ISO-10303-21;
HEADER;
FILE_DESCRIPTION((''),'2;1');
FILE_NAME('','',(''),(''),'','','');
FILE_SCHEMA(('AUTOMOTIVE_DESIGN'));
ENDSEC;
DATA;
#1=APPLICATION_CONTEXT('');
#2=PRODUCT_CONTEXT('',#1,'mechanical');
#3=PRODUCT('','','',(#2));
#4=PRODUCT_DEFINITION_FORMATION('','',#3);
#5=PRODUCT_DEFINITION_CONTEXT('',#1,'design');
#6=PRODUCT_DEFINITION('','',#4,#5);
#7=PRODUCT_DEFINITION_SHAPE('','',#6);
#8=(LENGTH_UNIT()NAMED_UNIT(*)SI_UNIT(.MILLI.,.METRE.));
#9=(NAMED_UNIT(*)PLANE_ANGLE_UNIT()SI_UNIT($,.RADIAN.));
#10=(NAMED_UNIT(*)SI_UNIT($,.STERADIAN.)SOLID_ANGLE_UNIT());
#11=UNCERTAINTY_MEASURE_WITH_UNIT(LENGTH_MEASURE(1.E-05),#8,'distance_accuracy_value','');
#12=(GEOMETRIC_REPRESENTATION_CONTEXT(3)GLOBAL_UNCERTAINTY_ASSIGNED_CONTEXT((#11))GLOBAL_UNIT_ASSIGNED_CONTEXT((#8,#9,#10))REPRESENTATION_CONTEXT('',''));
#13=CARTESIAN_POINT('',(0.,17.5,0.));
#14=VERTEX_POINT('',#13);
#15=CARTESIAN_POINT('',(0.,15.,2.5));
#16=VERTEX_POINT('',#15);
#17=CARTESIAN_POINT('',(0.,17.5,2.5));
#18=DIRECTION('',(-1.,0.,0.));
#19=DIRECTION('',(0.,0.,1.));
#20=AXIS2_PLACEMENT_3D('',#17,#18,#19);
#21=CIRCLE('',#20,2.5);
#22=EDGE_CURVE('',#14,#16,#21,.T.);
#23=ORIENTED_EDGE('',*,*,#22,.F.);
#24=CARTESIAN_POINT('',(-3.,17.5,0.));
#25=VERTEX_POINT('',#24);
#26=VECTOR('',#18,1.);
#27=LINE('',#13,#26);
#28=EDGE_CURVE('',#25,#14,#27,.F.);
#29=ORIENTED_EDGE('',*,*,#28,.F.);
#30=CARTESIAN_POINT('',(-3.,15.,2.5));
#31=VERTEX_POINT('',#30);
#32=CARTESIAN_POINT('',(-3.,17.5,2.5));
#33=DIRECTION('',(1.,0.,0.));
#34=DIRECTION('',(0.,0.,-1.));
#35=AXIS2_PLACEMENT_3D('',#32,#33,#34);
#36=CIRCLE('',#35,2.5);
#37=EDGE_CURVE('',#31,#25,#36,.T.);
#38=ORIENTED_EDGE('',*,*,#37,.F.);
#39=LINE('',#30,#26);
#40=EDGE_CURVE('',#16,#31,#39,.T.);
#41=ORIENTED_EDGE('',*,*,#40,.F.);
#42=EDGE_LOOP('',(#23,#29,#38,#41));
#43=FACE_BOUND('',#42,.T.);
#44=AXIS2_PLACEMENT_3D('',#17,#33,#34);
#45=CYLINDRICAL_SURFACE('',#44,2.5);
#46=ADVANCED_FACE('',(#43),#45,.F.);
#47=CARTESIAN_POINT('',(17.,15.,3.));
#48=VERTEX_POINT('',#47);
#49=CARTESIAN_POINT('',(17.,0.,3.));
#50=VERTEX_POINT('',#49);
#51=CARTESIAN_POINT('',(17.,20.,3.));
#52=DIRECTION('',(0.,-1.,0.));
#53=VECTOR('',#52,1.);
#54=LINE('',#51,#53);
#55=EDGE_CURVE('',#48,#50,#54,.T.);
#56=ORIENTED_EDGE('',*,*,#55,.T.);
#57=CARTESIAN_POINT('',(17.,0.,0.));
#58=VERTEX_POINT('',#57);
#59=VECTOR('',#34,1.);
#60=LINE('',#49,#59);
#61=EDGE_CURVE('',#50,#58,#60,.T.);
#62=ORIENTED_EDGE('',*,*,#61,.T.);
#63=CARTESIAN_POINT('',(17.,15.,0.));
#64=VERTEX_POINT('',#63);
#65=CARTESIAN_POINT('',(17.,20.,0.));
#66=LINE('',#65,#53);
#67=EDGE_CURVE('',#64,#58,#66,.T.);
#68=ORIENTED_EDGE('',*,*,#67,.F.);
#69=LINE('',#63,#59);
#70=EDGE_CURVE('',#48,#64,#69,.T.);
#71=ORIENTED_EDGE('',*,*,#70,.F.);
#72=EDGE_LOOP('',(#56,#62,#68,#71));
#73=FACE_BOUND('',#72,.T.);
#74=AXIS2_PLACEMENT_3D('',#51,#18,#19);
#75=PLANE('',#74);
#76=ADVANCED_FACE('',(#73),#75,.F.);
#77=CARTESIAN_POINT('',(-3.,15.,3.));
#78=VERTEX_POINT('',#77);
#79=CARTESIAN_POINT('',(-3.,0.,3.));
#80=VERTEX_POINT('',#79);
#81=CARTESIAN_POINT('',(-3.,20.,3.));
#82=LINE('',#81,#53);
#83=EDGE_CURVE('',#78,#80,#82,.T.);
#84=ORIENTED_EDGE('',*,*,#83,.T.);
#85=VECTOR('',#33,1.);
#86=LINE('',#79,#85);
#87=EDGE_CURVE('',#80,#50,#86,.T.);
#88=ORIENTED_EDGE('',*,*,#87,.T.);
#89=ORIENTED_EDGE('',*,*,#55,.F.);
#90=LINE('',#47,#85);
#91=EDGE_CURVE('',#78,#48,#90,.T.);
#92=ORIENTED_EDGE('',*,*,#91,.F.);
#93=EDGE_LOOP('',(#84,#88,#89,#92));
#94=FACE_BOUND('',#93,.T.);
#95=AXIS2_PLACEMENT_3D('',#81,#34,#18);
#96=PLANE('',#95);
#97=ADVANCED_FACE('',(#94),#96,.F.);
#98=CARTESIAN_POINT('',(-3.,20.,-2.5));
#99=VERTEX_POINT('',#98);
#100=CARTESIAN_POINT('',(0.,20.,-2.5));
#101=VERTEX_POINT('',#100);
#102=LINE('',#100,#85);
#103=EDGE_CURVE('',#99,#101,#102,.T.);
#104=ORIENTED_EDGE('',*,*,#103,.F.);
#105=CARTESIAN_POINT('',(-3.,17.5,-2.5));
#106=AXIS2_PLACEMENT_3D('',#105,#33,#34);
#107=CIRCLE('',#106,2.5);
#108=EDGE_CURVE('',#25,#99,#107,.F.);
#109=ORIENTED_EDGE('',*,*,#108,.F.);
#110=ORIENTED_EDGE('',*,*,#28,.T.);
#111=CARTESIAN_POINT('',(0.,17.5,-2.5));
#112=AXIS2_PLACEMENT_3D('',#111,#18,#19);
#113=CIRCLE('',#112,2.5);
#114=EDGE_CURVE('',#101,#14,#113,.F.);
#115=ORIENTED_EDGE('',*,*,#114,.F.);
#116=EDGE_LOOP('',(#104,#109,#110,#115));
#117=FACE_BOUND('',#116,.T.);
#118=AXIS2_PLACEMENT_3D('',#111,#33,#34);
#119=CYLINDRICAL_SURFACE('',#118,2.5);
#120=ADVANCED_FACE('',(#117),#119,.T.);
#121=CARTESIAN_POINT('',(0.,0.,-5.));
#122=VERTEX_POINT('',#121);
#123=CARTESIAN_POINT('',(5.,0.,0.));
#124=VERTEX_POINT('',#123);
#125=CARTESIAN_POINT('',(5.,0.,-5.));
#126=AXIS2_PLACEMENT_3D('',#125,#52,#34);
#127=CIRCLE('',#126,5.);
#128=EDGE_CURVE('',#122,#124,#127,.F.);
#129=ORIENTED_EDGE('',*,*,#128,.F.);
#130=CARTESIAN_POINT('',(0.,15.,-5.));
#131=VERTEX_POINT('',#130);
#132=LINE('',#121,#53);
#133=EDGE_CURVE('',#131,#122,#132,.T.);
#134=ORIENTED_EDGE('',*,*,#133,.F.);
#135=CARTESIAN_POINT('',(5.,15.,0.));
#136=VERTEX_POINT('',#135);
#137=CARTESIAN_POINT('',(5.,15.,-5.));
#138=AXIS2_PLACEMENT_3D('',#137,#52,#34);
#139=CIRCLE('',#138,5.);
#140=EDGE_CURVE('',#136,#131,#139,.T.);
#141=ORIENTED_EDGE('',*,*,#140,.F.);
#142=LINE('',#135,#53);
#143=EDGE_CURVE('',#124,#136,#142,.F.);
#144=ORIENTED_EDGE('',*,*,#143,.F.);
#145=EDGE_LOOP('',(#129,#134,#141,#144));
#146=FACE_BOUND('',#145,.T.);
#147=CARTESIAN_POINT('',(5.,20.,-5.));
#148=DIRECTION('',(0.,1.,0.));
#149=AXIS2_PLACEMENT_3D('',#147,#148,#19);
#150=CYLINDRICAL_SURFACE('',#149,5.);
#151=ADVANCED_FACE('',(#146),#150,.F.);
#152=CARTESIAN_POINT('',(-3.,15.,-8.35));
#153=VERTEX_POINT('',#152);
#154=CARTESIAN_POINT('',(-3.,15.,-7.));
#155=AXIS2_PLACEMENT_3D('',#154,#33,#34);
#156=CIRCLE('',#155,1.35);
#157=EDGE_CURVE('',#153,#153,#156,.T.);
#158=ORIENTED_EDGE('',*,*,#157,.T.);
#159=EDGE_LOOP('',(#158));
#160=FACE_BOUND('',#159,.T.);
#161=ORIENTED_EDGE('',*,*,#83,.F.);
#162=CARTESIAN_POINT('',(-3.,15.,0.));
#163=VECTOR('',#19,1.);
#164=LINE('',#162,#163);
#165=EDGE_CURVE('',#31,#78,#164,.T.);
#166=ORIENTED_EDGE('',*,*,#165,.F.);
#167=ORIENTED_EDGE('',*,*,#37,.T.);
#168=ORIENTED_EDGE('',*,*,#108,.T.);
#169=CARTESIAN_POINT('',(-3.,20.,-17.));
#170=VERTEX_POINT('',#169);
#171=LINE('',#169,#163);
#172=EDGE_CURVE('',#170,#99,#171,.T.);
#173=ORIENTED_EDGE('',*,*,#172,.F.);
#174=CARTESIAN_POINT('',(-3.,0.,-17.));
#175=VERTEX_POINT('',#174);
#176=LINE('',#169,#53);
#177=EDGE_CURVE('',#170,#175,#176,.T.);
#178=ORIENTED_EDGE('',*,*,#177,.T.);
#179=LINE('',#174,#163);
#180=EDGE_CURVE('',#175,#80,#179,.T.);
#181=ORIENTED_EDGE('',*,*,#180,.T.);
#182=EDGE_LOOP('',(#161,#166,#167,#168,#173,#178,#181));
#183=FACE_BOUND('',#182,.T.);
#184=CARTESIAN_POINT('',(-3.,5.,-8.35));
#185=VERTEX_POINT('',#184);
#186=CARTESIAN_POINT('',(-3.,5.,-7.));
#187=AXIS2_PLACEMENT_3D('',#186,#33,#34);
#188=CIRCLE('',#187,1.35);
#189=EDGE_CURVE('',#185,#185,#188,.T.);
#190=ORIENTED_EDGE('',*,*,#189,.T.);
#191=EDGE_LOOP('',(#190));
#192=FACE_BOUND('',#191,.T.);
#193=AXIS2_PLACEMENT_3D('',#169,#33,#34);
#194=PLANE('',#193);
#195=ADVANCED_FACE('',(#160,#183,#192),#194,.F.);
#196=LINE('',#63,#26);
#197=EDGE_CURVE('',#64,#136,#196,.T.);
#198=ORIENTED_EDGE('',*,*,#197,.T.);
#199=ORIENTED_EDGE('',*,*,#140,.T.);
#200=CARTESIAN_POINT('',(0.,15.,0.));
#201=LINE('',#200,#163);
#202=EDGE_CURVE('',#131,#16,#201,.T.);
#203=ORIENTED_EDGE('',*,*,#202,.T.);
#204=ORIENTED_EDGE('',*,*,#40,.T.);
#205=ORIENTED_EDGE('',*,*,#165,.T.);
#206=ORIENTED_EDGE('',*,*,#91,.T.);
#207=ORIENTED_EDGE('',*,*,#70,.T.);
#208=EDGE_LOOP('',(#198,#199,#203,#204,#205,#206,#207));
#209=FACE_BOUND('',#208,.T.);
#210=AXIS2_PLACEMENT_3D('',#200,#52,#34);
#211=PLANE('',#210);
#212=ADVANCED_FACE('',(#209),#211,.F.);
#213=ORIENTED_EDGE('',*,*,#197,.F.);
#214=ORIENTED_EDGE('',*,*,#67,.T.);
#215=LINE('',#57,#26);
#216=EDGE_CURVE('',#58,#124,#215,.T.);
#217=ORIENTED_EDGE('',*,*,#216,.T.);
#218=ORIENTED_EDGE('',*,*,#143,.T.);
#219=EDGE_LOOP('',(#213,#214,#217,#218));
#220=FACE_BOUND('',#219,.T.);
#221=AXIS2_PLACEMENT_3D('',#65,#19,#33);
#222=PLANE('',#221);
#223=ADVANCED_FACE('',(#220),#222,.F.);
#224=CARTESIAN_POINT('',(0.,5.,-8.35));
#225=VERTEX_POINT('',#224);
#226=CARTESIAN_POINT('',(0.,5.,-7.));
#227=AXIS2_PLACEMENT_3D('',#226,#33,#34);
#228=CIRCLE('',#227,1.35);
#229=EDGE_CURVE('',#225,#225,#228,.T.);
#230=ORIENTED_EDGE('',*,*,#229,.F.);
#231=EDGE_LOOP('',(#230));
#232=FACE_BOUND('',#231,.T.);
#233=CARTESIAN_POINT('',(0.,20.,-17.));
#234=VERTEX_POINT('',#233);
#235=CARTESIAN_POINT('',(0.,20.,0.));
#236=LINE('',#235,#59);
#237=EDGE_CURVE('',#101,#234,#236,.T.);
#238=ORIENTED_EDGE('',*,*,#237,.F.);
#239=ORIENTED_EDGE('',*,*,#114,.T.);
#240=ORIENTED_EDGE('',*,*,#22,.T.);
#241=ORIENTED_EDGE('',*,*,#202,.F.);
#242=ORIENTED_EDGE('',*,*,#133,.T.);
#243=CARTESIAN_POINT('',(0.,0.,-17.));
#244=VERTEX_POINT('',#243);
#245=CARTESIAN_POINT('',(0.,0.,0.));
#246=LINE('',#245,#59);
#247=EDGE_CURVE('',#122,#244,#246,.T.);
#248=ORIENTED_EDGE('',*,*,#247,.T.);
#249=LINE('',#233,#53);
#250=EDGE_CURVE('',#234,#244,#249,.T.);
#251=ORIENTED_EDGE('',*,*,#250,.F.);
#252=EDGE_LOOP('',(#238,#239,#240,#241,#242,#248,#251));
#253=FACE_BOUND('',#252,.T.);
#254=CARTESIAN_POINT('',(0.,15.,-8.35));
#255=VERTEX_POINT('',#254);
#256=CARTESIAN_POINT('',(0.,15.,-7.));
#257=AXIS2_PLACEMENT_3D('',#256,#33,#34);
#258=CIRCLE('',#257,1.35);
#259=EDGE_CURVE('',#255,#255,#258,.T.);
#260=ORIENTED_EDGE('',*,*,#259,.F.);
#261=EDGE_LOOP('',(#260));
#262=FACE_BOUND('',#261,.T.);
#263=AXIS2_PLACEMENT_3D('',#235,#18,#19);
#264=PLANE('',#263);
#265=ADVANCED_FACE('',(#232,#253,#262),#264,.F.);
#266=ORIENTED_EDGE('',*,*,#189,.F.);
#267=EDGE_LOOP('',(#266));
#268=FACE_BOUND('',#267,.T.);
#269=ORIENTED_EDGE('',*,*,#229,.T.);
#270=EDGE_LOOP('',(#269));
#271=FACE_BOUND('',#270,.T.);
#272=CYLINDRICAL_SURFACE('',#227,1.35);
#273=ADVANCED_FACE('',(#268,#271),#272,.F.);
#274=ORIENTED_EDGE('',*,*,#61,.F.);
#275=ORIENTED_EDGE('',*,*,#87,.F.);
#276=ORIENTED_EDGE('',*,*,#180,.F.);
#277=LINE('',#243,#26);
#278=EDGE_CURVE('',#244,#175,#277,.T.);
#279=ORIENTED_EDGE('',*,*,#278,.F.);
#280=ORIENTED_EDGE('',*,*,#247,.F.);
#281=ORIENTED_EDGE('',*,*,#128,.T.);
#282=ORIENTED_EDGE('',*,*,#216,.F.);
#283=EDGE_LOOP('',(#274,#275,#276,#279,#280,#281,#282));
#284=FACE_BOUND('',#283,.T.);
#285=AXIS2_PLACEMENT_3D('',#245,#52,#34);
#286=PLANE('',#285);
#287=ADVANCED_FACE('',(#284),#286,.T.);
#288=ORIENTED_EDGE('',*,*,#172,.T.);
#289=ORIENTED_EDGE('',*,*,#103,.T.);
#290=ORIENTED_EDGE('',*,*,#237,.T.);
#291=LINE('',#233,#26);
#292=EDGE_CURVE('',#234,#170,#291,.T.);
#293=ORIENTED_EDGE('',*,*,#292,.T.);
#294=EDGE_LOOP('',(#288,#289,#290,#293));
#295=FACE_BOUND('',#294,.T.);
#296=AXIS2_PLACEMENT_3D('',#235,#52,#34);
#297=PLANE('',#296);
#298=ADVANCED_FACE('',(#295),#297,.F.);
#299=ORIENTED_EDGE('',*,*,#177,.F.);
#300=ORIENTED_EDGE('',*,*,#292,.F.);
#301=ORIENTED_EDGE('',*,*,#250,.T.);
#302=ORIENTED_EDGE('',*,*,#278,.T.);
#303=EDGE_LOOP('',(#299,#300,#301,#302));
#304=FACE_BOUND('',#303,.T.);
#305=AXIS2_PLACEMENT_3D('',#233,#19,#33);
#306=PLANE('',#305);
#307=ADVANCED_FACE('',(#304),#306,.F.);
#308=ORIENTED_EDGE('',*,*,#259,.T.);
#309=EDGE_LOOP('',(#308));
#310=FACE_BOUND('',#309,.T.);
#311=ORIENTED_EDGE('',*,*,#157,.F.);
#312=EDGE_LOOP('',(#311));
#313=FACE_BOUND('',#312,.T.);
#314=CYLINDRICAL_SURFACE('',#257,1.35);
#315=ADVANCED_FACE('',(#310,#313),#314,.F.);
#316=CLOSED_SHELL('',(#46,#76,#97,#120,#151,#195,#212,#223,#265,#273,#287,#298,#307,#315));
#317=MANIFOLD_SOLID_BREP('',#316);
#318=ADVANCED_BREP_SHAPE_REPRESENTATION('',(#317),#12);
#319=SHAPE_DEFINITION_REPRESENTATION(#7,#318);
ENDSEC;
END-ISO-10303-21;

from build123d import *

# Parameters (mm, degrees)
BOSS_EXTRUDE1_DEPTH            = 20
F_2_7_2_7_DIAMETER_HOLE1_D     = 2.7
F_2_7_2_7_DIAMETER_HOLE1_DEPTH = 15
F_2_7_2_7_DIAMETER_HOLE1_TIP   = 0.811161836
SKETCH4_W                      = 20
SKETCH4_H                      = 3
CUT_EXTRUDE1_DEPTH             = 5
FILLET2_R                      = 2.5
FILLET3_R                      = 5


with BuildPart() as part:
    # Sketch1 → Boss-Extrude1 (new body)
    with BuildSketch(Plane(origin=(0, 0, 0), x_dir=(1, 0, 0), z_dir=(0, 1, 0))):
        Polygon((0, 0), (0, 17), (-3, 17), (-3, -3), (17, -3), (17, 0), align=None)
    extrude(amount=BOSS_EXTRUDE1_DEPTH)

    # Ø2.7 (2.7) Diameter Hole1
    with Locations(Plane(origin=(0, 0, 0), x_dir=(0, 0, -1), z_dir=(1, 0, 0))):
        with Locations((7, 5), (7, 15)):
            Hole(F_2_7_2_7_DIAMETER_HOLE1_D / 2, depth=F_2_7_2_7_DIAMETER_HOLE1_DEPTH)
            with Locations((0, 0, -(F_2_7_2_7_DIAMETER_HOLE1_DEPTH + F_2_7_2_7_DIAMETER_HOLE1_TIP / 2))):  # 118° drill point
                Cone(0, F_2_7_2_7_DIAMETER_HOLE1_D / 2, F_2_7_2_7_DIAMETER_HOLE1_TIP, mode=Mode.SUBTRACT)

    # Sketch4 → Cut-Extrude1 (cut)
    with BuildSketch(Plane(origin=(0, 20, 0), x_dir=(1, 0, 0), z_dir=(0, 1, 0))):
        with Locations((7, -1.5)):
            Rectangle(SKETCH4_W, SKETCH4_H)
    extrude(amount=-CUT_EXTRUDE1_DEPTH, mode=Mode.SUBTRACT)

    # Fillet2
    fillet2_edges = [part.edges().sort_by_distance(p)[0] for p in [
        (-1.5, 15, 0),
    ]]
    fillet(fillet2_edges, radius=FILLET2_R)
    fillet2_2_edges = [part.edges().sort_by_distance(p)[0] for p in [
        (-1.5, 20, 0),
    ]]
    fillet(fillet2_2_edges, radius=FILLET2_R - 0.0001)  # a hair under: the kernel refuses the full size

    # Fillet3
    fillet3_edges = [part.edges().sort_by_distance(p)[0] for p in [
        (0, 7.5, 0),
    ]]
    fillet(fillet3_edges, radius=FILLET3_R)


solid = part.part
